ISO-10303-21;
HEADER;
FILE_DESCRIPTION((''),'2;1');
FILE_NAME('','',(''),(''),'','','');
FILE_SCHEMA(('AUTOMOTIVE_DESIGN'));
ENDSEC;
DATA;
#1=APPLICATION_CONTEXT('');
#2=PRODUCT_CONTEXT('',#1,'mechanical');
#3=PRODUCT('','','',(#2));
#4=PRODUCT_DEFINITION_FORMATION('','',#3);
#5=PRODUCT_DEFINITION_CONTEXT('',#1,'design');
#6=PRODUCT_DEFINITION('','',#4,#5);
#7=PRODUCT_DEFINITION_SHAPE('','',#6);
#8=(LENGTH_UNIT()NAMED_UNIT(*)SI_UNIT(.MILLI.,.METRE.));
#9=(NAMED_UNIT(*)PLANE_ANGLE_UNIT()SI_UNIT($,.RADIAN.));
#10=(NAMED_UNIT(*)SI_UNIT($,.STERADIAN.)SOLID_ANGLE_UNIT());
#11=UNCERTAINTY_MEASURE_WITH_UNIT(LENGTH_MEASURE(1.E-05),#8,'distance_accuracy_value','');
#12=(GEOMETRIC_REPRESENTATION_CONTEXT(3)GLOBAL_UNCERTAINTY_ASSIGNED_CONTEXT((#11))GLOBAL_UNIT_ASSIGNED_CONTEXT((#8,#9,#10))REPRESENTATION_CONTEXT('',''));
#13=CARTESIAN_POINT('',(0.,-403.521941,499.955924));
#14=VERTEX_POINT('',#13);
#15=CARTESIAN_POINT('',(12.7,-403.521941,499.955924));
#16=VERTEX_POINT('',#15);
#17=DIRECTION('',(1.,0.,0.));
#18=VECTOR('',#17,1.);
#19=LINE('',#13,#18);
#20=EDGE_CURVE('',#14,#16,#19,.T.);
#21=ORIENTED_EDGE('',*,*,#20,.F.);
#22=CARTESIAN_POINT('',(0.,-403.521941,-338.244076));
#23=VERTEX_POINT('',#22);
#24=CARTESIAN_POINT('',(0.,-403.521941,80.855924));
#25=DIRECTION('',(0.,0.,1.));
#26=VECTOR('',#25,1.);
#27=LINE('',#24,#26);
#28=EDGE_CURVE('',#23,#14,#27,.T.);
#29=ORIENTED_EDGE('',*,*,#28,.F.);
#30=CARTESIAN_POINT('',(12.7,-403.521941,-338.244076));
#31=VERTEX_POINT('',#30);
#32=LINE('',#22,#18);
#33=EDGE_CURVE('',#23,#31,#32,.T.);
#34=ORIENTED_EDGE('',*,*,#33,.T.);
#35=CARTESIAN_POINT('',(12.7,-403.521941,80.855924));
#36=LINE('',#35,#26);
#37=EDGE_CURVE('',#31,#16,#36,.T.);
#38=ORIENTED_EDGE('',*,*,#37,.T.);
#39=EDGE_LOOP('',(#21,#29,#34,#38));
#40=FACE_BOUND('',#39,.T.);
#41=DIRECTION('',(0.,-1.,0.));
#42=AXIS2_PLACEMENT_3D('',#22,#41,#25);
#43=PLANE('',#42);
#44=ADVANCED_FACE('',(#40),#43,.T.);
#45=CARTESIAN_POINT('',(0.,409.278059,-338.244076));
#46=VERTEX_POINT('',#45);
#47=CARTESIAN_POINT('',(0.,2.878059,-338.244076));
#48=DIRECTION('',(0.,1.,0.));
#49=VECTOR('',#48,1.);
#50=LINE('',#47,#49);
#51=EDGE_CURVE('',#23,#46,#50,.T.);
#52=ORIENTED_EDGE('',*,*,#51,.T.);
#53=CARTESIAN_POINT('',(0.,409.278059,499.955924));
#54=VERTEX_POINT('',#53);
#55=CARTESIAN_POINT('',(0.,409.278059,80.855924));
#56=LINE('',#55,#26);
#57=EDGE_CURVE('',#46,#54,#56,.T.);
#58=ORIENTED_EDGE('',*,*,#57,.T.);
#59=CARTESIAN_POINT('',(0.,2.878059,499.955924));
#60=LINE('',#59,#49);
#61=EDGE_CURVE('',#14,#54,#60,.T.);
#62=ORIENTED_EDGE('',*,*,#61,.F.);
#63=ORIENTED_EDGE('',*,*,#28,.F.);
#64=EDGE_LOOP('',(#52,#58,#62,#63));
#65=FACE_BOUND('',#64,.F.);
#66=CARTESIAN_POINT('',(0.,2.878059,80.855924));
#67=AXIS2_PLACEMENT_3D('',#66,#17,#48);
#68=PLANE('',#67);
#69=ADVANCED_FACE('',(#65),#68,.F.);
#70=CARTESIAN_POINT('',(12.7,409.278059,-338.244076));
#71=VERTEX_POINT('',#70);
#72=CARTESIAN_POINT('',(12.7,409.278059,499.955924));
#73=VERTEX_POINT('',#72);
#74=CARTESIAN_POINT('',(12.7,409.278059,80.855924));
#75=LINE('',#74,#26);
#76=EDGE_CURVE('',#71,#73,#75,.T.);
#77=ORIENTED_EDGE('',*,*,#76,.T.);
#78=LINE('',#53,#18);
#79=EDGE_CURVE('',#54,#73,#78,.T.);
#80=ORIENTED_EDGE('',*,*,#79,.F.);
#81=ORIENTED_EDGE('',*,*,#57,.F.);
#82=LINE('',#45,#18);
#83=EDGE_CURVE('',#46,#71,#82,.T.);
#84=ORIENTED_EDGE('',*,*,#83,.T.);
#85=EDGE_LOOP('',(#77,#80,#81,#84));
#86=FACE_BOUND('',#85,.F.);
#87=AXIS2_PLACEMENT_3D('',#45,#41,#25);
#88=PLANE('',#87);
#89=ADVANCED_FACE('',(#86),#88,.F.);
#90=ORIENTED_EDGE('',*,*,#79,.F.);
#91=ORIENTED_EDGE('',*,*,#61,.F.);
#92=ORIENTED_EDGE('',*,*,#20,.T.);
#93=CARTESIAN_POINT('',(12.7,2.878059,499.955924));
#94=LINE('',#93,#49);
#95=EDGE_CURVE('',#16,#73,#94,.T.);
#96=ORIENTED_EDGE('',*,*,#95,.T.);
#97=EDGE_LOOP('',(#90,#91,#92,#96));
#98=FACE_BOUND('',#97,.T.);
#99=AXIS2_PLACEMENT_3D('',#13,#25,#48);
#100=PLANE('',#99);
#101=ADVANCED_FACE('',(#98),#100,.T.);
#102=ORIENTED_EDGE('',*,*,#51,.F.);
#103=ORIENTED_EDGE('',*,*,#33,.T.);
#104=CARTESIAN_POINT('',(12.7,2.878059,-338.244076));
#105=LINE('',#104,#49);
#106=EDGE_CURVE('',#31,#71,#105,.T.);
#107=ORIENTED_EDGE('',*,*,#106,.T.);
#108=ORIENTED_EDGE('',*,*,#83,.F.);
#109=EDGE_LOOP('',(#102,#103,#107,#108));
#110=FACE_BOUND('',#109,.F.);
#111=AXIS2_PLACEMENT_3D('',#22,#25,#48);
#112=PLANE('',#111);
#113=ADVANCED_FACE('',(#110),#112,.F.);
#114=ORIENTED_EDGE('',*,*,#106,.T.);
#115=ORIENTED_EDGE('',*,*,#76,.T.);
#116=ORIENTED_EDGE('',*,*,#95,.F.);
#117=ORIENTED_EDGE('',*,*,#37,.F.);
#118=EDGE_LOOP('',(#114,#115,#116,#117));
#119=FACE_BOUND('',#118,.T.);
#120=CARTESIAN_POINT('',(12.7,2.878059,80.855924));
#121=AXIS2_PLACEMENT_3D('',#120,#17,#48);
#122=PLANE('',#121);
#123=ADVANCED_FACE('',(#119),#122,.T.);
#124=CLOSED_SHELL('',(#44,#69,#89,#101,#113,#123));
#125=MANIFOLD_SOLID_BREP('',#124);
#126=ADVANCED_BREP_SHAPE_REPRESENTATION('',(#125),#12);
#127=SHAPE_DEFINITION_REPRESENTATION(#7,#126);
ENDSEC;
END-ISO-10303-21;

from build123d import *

# Parameters (mm, degrees)
F0_W     = 812.8
F0_H     = 838.2
F1_DEPTH = 12.7


# Not quite as in the source:
# - a length typed as a fraction of an inch, garbled in the dataset ("3 / 203.2 mm" for 3/8 in), is restored


with BuildPart() as f1:
    # F0 (on Right) → F1 (new body)
    with BuildSketch(Plane.YZ):
        with Locations((2.8780587018, 80.8559241794)):
            Rectangle(F0_W, F0_H)
    extrude(amount=F1_DEPTH)


solid = f1.part
